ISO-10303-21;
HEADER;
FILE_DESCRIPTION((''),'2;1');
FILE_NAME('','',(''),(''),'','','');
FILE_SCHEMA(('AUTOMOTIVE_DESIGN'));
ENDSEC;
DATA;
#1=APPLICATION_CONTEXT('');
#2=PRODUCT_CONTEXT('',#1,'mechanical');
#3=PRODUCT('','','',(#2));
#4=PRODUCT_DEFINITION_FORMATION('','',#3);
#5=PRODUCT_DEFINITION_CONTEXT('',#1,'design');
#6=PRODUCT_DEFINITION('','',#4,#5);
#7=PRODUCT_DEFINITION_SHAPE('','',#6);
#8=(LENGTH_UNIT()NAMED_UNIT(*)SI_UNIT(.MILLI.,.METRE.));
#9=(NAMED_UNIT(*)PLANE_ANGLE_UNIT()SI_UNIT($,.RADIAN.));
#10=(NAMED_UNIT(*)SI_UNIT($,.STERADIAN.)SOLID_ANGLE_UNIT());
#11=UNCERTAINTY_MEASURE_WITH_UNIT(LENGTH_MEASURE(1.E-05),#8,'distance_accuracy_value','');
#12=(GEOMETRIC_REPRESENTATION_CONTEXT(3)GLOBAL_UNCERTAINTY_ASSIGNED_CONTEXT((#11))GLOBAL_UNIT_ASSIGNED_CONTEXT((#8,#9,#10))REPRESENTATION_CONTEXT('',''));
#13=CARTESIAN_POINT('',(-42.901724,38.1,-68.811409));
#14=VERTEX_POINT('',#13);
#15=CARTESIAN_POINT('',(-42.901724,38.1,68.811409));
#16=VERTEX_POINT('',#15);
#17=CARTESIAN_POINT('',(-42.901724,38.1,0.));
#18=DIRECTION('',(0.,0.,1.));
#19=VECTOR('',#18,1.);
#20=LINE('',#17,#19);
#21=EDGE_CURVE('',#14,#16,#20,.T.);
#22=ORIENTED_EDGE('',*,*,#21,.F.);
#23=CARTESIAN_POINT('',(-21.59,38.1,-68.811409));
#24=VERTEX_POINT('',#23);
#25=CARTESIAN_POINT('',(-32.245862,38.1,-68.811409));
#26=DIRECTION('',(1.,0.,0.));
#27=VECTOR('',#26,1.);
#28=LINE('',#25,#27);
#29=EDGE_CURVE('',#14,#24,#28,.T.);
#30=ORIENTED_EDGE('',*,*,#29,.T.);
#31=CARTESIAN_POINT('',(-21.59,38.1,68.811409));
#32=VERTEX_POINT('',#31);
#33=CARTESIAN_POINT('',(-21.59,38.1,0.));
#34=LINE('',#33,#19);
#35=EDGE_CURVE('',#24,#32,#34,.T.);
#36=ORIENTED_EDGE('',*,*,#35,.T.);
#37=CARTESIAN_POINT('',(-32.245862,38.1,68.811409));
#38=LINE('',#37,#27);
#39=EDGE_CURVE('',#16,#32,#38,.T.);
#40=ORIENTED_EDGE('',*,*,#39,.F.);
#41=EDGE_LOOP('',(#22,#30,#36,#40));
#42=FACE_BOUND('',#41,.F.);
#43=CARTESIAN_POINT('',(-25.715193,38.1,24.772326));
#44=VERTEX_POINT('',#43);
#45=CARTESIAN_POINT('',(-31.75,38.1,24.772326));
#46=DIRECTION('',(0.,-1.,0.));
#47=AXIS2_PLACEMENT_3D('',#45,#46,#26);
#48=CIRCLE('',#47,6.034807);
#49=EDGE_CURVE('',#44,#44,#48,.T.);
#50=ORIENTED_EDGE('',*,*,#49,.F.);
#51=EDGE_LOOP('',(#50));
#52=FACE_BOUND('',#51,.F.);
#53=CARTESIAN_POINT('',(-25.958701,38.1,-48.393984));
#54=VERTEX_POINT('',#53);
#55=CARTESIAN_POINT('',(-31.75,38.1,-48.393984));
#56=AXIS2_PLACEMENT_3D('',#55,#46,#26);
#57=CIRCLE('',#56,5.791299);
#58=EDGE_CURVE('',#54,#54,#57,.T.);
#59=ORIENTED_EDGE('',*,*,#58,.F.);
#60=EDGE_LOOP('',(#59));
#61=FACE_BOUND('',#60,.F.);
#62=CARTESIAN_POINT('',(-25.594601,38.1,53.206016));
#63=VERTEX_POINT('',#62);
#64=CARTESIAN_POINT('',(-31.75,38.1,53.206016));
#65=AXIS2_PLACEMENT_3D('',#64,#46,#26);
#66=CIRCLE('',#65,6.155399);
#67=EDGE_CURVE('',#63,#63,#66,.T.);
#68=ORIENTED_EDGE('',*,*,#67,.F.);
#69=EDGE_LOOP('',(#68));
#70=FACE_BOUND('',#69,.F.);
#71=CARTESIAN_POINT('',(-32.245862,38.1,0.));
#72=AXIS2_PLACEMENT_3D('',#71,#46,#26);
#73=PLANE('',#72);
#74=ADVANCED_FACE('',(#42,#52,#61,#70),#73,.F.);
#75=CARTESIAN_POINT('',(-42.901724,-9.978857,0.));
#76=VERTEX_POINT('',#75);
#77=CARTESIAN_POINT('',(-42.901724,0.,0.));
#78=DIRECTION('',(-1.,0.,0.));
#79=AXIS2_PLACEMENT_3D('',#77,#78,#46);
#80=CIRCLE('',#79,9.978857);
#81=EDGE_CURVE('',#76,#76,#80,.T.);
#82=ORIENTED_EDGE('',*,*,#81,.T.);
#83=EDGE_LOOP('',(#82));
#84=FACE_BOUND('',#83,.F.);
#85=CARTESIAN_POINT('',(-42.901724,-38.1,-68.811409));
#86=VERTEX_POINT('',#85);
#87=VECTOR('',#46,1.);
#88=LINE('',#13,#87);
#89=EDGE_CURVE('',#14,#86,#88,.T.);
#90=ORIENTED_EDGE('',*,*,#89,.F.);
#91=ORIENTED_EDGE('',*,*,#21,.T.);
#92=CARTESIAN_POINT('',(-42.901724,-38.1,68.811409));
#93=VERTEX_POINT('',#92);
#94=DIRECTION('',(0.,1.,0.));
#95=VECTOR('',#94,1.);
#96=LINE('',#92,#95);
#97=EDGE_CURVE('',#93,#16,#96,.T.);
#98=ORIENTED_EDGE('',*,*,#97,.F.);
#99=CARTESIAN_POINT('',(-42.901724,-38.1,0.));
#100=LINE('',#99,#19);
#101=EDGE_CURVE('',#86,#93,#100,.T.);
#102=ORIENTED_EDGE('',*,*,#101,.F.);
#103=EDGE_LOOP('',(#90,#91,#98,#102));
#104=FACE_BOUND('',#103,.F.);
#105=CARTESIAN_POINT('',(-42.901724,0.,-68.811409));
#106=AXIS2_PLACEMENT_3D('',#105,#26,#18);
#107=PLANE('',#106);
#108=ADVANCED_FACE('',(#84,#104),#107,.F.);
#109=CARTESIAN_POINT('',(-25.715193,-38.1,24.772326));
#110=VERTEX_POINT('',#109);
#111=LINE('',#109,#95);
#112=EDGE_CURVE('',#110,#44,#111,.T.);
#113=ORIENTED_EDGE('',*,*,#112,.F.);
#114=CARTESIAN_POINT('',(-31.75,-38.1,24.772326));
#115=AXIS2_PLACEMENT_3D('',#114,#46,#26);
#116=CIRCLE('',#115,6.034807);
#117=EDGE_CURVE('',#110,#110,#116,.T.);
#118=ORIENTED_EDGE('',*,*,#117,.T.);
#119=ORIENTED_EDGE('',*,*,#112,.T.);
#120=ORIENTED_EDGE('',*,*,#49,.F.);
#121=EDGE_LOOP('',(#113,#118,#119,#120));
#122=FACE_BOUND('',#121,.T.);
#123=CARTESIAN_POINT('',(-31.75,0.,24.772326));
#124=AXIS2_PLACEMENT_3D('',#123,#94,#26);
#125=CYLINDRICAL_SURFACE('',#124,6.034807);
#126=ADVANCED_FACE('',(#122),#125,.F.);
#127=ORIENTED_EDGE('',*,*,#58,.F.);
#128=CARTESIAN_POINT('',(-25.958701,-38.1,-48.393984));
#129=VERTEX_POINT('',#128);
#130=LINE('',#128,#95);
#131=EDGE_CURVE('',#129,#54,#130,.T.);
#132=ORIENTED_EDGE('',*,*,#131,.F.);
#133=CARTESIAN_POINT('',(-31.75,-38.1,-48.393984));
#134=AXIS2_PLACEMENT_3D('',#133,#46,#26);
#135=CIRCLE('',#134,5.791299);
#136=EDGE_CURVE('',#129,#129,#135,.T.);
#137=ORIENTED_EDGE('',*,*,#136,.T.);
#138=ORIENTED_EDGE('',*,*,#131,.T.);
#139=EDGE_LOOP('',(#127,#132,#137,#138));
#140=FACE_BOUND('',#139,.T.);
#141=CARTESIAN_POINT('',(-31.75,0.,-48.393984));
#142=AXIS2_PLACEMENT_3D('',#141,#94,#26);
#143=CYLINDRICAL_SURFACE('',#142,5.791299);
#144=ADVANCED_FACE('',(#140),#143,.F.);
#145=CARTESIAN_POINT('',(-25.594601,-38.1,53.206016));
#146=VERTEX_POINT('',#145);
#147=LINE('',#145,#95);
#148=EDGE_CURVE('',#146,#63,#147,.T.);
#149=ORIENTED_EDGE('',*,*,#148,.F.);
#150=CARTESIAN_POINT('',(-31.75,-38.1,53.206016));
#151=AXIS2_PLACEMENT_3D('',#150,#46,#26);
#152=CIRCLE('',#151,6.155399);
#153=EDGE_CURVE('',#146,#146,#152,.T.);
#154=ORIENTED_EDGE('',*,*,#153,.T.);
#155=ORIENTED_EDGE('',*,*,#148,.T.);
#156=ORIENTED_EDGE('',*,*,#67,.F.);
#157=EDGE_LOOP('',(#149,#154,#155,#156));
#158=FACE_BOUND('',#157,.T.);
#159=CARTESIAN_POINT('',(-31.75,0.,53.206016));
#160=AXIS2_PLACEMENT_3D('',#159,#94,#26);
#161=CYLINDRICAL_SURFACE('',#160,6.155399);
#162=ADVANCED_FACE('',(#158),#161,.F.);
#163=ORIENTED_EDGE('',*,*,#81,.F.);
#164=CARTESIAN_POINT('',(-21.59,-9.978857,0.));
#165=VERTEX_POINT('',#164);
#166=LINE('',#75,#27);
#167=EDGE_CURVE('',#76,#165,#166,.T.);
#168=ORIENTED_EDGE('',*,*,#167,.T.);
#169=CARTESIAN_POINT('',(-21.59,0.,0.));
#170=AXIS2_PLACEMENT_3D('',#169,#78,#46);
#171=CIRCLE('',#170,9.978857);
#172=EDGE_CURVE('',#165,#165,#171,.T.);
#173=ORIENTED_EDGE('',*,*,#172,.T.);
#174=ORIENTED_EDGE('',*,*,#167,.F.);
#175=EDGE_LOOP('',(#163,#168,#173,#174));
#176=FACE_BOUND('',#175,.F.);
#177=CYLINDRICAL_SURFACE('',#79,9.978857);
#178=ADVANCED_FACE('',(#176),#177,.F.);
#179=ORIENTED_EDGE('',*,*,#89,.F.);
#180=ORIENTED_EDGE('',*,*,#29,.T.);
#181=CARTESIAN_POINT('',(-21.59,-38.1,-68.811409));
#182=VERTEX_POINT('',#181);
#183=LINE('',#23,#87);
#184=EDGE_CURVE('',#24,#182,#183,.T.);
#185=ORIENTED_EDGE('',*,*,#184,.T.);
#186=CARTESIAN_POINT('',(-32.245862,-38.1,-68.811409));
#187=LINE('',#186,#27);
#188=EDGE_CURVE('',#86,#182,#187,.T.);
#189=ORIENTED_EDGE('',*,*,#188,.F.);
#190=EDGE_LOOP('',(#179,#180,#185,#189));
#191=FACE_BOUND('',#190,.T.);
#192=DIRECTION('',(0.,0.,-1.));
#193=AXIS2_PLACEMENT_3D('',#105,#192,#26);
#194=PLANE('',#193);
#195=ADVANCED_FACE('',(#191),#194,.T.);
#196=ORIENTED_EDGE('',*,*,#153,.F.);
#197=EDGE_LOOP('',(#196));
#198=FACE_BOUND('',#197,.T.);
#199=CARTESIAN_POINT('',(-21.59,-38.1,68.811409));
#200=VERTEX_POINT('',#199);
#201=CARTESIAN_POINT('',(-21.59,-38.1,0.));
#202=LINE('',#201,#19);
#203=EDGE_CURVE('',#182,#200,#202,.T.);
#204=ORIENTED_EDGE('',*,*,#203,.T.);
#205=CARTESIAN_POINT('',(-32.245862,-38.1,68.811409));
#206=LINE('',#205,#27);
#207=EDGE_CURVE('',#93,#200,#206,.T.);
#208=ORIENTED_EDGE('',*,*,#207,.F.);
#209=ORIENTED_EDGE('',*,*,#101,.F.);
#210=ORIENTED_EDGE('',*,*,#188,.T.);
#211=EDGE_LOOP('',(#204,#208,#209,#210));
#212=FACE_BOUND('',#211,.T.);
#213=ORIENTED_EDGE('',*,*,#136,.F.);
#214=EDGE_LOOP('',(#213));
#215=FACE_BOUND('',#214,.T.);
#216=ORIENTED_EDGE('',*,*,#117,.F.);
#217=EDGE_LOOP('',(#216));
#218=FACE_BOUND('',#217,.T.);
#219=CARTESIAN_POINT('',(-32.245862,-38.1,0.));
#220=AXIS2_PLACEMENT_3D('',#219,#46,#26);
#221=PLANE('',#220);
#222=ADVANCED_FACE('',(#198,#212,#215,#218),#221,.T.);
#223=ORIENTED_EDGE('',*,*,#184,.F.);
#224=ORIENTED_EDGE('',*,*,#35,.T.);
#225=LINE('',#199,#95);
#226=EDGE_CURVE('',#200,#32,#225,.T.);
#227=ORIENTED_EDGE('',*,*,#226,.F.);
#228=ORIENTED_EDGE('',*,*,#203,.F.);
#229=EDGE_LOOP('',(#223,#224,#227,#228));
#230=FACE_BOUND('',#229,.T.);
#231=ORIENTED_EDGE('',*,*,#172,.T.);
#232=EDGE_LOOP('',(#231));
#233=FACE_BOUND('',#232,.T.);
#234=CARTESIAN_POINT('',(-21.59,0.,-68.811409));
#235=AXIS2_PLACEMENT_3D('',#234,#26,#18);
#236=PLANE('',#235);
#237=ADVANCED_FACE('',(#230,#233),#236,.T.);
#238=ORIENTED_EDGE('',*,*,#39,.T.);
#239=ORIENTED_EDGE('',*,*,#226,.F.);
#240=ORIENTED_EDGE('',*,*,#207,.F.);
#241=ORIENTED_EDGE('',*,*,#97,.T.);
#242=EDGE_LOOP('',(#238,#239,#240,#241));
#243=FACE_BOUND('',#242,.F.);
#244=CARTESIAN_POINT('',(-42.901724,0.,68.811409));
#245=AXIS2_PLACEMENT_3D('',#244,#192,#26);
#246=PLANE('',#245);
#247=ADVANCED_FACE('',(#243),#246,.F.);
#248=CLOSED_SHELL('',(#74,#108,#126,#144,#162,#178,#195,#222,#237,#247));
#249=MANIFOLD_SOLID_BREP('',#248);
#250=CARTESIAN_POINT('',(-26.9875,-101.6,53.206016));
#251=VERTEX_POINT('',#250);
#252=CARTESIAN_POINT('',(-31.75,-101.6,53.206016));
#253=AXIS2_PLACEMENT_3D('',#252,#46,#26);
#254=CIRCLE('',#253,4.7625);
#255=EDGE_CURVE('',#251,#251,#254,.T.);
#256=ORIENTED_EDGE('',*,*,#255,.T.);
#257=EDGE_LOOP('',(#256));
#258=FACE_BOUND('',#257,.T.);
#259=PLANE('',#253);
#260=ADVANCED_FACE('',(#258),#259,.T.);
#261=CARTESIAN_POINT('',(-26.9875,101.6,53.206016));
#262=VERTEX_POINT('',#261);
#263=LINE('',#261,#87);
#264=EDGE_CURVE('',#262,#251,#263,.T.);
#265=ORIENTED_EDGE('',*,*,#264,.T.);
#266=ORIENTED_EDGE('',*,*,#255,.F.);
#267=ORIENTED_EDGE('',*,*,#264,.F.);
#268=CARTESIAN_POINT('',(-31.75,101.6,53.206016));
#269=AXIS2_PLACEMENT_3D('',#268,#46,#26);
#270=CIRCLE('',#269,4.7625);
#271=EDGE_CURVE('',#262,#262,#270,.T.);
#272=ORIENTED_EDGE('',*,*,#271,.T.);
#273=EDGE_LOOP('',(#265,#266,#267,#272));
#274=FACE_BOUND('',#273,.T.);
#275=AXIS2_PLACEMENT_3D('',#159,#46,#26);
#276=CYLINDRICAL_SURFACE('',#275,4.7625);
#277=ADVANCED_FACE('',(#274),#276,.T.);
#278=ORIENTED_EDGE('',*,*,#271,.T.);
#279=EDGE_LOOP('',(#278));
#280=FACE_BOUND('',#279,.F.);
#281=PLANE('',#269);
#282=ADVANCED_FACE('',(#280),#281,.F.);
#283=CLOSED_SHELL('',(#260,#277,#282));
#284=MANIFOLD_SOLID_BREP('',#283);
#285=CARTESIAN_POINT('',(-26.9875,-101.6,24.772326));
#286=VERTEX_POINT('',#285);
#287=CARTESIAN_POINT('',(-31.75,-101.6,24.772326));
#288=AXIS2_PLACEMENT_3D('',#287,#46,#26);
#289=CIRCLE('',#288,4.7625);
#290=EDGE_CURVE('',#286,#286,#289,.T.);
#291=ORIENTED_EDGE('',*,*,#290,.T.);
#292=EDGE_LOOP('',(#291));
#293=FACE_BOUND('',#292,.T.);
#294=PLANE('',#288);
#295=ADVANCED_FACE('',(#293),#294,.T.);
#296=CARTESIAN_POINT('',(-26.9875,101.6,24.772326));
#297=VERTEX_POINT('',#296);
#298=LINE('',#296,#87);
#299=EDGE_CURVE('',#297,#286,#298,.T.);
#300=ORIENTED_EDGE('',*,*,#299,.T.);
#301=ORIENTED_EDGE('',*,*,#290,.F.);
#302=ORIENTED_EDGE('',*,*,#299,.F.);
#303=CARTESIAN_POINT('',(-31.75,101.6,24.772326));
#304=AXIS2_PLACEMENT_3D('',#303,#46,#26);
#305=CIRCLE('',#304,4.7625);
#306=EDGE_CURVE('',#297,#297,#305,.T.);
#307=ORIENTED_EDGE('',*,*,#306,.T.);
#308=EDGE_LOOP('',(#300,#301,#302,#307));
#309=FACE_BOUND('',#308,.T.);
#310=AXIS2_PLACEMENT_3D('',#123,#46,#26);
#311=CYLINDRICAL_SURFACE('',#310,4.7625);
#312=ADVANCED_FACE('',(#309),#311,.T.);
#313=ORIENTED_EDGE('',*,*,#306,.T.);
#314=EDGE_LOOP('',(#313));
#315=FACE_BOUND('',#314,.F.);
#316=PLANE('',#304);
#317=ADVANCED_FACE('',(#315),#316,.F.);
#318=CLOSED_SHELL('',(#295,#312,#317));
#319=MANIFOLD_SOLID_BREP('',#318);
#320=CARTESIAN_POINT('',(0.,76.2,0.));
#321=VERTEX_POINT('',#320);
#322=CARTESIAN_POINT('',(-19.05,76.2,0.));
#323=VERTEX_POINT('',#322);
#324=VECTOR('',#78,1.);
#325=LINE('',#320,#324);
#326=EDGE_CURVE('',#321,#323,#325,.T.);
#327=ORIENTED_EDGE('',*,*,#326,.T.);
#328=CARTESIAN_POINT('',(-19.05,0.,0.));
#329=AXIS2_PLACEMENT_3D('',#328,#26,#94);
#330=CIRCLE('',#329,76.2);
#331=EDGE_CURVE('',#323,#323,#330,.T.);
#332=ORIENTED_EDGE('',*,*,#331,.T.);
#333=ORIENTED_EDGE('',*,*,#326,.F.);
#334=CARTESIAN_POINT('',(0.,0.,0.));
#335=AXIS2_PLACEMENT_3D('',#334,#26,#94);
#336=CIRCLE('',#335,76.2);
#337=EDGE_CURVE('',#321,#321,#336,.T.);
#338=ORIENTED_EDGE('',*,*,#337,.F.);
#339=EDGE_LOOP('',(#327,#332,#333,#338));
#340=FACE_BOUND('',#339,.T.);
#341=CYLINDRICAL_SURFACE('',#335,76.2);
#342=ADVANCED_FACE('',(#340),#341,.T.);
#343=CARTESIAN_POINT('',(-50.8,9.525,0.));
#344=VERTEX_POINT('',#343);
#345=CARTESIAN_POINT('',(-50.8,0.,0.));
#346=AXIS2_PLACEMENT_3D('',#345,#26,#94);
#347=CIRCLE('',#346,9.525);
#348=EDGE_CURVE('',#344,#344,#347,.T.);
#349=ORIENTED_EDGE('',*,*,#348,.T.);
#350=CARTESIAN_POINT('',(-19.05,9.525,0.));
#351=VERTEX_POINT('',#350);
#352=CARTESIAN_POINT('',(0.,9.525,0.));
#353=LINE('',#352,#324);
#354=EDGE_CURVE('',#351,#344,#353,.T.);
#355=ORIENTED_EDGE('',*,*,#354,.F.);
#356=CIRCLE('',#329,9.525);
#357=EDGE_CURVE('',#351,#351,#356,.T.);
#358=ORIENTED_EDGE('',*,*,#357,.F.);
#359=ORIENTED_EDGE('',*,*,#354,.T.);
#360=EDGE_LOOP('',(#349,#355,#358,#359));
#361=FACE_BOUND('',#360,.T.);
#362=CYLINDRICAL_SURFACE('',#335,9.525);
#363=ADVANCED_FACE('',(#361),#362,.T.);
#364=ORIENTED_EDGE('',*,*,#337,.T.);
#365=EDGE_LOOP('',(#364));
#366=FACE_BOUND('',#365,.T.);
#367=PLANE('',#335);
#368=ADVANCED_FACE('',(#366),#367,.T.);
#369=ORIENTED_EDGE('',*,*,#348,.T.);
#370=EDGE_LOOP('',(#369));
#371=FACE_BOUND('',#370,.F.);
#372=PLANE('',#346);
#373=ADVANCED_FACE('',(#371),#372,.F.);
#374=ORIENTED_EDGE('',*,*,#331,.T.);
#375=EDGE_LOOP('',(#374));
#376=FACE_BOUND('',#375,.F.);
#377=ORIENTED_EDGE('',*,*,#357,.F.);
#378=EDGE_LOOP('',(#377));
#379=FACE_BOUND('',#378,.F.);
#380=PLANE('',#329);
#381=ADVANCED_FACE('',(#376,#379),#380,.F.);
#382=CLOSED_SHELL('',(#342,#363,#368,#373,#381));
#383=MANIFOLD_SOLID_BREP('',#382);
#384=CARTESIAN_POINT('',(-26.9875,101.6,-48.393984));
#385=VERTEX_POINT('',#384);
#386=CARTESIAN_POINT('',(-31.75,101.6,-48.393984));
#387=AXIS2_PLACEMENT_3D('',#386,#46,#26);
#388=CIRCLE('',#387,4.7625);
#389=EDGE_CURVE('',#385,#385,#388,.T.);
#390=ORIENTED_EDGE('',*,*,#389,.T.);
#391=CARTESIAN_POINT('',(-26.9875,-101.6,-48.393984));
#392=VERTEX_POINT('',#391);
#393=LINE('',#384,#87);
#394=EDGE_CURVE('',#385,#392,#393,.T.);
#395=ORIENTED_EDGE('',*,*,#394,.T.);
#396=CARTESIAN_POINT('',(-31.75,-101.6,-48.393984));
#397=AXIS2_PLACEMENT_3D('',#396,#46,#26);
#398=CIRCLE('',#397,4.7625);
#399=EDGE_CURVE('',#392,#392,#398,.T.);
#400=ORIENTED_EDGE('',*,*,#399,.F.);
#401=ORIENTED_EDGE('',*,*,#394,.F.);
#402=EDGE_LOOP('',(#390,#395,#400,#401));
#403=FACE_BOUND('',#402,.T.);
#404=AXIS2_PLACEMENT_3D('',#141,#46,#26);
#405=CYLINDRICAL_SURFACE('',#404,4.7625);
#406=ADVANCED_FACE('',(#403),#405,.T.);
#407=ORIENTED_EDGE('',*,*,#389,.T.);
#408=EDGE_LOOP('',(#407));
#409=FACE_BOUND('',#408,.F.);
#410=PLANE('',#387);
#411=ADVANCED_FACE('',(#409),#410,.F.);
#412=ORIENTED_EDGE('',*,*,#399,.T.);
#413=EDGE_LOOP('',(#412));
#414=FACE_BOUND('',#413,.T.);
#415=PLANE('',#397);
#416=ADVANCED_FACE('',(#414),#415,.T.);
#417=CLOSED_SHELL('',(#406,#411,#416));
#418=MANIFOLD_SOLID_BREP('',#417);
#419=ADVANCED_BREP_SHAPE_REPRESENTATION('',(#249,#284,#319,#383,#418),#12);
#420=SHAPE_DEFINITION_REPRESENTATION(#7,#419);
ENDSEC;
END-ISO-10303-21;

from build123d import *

# Parameters (mm, degrees)
F0_R     = 4.7625
F1_DEPTH = 101.6
F2_R     = 76.2
F2_R_2   = 9.525
F3_DEPTH = 19.05
F4_DEPTH = 50.8
F5_W     = 21.3117243114
F5_H     = 137.6228183508
F5_R     = 5.7912992377
F5_R_2   = 6.0348069949
F5_R_3   = 6.155398866
F6_DEPTH = 38.1
F7_R     = 9.9788565771
F8_DEPTH = 42.9027243114


with BuildPart() as f1:
    # F0 (on Front) → F1 (new body, symmetric)
    with BuildSketch(Plane.XZ):
        with Locations((-31.75, 53.2060163036)):
            Circle(F0_R)
    extrude(amount=F1_DEPTH, both=True)


with BuildPart() as f1b:
    # F0 (on Front) → F1, piece 2 (new body, symmetric)
    with BuildSketch(Plane.XZ):
        with Locations((-31.75, -48.3939836964)):
            Circle(F0_R)
    extrude(amount=F1_DEPTH, both=True)


with BuildPart() as f1c:
    # F0 (on Front) → F1, piece 3 (new body, symmetric)
    with BuildSketch(Plane.XZ):
        with Locations((-31.75, 24.7723255306)):
            Circle(F0_R)
    extrude(amount=F1_DEPTH, both=True)


with BuildPart() as f3:
    # F2 (on Right) → F3 (new body)
    with BuildSketch(Plane.YZ):
        Circle(F2_R)
        Circle(F2_R_2, mode=Mode.SUBTRACT)
    extrude(amount=-F3_DEPTH)

    # F2 (on Right) → F4 (join)
    with BuildSketch(Plane.YZ):
        Circle(F2_R_2)
    extrude(amount=-F4_DEPTH)


with BuildPart() as f6:
    # F5 (on Front) → F6 (new body, symmetric)
    with BuildSketch(Plane.XZ):
        with Locations((-32.2458621557, 0)):
            Rectangle(F5_W, F5_H)
        with Locations((-31.75, -48.3939836964)):
            Circle(F5_R, mode=Mode.SUBTRACT)
        with Locations((-31.75, 24.7723255306)):
            Circle(F5_R_2, mode=Mode.SUBTRACT)
        with Locations((-31.75, 53.2060163036)):
            Circle(F5_R_3, mode=Mode.SUBTRACT)
    extrude(amount=F6_DEPTH, both=True)

    # F7 (on face) → F8 (cut, through all)
    with BuildSketch(Plane(origin=(-42.9017243114, 0, 0), x_dir=(0, -1, 0), z_dir=(-1, 0, 0))):
        Circle(F7_R)
    extrude(amount=-F8_DEPTH, mode=Mode.SUBTRACT)


solid = Compound([f1.part, f1b.part, f1c.part, f3.part, f6.part])
